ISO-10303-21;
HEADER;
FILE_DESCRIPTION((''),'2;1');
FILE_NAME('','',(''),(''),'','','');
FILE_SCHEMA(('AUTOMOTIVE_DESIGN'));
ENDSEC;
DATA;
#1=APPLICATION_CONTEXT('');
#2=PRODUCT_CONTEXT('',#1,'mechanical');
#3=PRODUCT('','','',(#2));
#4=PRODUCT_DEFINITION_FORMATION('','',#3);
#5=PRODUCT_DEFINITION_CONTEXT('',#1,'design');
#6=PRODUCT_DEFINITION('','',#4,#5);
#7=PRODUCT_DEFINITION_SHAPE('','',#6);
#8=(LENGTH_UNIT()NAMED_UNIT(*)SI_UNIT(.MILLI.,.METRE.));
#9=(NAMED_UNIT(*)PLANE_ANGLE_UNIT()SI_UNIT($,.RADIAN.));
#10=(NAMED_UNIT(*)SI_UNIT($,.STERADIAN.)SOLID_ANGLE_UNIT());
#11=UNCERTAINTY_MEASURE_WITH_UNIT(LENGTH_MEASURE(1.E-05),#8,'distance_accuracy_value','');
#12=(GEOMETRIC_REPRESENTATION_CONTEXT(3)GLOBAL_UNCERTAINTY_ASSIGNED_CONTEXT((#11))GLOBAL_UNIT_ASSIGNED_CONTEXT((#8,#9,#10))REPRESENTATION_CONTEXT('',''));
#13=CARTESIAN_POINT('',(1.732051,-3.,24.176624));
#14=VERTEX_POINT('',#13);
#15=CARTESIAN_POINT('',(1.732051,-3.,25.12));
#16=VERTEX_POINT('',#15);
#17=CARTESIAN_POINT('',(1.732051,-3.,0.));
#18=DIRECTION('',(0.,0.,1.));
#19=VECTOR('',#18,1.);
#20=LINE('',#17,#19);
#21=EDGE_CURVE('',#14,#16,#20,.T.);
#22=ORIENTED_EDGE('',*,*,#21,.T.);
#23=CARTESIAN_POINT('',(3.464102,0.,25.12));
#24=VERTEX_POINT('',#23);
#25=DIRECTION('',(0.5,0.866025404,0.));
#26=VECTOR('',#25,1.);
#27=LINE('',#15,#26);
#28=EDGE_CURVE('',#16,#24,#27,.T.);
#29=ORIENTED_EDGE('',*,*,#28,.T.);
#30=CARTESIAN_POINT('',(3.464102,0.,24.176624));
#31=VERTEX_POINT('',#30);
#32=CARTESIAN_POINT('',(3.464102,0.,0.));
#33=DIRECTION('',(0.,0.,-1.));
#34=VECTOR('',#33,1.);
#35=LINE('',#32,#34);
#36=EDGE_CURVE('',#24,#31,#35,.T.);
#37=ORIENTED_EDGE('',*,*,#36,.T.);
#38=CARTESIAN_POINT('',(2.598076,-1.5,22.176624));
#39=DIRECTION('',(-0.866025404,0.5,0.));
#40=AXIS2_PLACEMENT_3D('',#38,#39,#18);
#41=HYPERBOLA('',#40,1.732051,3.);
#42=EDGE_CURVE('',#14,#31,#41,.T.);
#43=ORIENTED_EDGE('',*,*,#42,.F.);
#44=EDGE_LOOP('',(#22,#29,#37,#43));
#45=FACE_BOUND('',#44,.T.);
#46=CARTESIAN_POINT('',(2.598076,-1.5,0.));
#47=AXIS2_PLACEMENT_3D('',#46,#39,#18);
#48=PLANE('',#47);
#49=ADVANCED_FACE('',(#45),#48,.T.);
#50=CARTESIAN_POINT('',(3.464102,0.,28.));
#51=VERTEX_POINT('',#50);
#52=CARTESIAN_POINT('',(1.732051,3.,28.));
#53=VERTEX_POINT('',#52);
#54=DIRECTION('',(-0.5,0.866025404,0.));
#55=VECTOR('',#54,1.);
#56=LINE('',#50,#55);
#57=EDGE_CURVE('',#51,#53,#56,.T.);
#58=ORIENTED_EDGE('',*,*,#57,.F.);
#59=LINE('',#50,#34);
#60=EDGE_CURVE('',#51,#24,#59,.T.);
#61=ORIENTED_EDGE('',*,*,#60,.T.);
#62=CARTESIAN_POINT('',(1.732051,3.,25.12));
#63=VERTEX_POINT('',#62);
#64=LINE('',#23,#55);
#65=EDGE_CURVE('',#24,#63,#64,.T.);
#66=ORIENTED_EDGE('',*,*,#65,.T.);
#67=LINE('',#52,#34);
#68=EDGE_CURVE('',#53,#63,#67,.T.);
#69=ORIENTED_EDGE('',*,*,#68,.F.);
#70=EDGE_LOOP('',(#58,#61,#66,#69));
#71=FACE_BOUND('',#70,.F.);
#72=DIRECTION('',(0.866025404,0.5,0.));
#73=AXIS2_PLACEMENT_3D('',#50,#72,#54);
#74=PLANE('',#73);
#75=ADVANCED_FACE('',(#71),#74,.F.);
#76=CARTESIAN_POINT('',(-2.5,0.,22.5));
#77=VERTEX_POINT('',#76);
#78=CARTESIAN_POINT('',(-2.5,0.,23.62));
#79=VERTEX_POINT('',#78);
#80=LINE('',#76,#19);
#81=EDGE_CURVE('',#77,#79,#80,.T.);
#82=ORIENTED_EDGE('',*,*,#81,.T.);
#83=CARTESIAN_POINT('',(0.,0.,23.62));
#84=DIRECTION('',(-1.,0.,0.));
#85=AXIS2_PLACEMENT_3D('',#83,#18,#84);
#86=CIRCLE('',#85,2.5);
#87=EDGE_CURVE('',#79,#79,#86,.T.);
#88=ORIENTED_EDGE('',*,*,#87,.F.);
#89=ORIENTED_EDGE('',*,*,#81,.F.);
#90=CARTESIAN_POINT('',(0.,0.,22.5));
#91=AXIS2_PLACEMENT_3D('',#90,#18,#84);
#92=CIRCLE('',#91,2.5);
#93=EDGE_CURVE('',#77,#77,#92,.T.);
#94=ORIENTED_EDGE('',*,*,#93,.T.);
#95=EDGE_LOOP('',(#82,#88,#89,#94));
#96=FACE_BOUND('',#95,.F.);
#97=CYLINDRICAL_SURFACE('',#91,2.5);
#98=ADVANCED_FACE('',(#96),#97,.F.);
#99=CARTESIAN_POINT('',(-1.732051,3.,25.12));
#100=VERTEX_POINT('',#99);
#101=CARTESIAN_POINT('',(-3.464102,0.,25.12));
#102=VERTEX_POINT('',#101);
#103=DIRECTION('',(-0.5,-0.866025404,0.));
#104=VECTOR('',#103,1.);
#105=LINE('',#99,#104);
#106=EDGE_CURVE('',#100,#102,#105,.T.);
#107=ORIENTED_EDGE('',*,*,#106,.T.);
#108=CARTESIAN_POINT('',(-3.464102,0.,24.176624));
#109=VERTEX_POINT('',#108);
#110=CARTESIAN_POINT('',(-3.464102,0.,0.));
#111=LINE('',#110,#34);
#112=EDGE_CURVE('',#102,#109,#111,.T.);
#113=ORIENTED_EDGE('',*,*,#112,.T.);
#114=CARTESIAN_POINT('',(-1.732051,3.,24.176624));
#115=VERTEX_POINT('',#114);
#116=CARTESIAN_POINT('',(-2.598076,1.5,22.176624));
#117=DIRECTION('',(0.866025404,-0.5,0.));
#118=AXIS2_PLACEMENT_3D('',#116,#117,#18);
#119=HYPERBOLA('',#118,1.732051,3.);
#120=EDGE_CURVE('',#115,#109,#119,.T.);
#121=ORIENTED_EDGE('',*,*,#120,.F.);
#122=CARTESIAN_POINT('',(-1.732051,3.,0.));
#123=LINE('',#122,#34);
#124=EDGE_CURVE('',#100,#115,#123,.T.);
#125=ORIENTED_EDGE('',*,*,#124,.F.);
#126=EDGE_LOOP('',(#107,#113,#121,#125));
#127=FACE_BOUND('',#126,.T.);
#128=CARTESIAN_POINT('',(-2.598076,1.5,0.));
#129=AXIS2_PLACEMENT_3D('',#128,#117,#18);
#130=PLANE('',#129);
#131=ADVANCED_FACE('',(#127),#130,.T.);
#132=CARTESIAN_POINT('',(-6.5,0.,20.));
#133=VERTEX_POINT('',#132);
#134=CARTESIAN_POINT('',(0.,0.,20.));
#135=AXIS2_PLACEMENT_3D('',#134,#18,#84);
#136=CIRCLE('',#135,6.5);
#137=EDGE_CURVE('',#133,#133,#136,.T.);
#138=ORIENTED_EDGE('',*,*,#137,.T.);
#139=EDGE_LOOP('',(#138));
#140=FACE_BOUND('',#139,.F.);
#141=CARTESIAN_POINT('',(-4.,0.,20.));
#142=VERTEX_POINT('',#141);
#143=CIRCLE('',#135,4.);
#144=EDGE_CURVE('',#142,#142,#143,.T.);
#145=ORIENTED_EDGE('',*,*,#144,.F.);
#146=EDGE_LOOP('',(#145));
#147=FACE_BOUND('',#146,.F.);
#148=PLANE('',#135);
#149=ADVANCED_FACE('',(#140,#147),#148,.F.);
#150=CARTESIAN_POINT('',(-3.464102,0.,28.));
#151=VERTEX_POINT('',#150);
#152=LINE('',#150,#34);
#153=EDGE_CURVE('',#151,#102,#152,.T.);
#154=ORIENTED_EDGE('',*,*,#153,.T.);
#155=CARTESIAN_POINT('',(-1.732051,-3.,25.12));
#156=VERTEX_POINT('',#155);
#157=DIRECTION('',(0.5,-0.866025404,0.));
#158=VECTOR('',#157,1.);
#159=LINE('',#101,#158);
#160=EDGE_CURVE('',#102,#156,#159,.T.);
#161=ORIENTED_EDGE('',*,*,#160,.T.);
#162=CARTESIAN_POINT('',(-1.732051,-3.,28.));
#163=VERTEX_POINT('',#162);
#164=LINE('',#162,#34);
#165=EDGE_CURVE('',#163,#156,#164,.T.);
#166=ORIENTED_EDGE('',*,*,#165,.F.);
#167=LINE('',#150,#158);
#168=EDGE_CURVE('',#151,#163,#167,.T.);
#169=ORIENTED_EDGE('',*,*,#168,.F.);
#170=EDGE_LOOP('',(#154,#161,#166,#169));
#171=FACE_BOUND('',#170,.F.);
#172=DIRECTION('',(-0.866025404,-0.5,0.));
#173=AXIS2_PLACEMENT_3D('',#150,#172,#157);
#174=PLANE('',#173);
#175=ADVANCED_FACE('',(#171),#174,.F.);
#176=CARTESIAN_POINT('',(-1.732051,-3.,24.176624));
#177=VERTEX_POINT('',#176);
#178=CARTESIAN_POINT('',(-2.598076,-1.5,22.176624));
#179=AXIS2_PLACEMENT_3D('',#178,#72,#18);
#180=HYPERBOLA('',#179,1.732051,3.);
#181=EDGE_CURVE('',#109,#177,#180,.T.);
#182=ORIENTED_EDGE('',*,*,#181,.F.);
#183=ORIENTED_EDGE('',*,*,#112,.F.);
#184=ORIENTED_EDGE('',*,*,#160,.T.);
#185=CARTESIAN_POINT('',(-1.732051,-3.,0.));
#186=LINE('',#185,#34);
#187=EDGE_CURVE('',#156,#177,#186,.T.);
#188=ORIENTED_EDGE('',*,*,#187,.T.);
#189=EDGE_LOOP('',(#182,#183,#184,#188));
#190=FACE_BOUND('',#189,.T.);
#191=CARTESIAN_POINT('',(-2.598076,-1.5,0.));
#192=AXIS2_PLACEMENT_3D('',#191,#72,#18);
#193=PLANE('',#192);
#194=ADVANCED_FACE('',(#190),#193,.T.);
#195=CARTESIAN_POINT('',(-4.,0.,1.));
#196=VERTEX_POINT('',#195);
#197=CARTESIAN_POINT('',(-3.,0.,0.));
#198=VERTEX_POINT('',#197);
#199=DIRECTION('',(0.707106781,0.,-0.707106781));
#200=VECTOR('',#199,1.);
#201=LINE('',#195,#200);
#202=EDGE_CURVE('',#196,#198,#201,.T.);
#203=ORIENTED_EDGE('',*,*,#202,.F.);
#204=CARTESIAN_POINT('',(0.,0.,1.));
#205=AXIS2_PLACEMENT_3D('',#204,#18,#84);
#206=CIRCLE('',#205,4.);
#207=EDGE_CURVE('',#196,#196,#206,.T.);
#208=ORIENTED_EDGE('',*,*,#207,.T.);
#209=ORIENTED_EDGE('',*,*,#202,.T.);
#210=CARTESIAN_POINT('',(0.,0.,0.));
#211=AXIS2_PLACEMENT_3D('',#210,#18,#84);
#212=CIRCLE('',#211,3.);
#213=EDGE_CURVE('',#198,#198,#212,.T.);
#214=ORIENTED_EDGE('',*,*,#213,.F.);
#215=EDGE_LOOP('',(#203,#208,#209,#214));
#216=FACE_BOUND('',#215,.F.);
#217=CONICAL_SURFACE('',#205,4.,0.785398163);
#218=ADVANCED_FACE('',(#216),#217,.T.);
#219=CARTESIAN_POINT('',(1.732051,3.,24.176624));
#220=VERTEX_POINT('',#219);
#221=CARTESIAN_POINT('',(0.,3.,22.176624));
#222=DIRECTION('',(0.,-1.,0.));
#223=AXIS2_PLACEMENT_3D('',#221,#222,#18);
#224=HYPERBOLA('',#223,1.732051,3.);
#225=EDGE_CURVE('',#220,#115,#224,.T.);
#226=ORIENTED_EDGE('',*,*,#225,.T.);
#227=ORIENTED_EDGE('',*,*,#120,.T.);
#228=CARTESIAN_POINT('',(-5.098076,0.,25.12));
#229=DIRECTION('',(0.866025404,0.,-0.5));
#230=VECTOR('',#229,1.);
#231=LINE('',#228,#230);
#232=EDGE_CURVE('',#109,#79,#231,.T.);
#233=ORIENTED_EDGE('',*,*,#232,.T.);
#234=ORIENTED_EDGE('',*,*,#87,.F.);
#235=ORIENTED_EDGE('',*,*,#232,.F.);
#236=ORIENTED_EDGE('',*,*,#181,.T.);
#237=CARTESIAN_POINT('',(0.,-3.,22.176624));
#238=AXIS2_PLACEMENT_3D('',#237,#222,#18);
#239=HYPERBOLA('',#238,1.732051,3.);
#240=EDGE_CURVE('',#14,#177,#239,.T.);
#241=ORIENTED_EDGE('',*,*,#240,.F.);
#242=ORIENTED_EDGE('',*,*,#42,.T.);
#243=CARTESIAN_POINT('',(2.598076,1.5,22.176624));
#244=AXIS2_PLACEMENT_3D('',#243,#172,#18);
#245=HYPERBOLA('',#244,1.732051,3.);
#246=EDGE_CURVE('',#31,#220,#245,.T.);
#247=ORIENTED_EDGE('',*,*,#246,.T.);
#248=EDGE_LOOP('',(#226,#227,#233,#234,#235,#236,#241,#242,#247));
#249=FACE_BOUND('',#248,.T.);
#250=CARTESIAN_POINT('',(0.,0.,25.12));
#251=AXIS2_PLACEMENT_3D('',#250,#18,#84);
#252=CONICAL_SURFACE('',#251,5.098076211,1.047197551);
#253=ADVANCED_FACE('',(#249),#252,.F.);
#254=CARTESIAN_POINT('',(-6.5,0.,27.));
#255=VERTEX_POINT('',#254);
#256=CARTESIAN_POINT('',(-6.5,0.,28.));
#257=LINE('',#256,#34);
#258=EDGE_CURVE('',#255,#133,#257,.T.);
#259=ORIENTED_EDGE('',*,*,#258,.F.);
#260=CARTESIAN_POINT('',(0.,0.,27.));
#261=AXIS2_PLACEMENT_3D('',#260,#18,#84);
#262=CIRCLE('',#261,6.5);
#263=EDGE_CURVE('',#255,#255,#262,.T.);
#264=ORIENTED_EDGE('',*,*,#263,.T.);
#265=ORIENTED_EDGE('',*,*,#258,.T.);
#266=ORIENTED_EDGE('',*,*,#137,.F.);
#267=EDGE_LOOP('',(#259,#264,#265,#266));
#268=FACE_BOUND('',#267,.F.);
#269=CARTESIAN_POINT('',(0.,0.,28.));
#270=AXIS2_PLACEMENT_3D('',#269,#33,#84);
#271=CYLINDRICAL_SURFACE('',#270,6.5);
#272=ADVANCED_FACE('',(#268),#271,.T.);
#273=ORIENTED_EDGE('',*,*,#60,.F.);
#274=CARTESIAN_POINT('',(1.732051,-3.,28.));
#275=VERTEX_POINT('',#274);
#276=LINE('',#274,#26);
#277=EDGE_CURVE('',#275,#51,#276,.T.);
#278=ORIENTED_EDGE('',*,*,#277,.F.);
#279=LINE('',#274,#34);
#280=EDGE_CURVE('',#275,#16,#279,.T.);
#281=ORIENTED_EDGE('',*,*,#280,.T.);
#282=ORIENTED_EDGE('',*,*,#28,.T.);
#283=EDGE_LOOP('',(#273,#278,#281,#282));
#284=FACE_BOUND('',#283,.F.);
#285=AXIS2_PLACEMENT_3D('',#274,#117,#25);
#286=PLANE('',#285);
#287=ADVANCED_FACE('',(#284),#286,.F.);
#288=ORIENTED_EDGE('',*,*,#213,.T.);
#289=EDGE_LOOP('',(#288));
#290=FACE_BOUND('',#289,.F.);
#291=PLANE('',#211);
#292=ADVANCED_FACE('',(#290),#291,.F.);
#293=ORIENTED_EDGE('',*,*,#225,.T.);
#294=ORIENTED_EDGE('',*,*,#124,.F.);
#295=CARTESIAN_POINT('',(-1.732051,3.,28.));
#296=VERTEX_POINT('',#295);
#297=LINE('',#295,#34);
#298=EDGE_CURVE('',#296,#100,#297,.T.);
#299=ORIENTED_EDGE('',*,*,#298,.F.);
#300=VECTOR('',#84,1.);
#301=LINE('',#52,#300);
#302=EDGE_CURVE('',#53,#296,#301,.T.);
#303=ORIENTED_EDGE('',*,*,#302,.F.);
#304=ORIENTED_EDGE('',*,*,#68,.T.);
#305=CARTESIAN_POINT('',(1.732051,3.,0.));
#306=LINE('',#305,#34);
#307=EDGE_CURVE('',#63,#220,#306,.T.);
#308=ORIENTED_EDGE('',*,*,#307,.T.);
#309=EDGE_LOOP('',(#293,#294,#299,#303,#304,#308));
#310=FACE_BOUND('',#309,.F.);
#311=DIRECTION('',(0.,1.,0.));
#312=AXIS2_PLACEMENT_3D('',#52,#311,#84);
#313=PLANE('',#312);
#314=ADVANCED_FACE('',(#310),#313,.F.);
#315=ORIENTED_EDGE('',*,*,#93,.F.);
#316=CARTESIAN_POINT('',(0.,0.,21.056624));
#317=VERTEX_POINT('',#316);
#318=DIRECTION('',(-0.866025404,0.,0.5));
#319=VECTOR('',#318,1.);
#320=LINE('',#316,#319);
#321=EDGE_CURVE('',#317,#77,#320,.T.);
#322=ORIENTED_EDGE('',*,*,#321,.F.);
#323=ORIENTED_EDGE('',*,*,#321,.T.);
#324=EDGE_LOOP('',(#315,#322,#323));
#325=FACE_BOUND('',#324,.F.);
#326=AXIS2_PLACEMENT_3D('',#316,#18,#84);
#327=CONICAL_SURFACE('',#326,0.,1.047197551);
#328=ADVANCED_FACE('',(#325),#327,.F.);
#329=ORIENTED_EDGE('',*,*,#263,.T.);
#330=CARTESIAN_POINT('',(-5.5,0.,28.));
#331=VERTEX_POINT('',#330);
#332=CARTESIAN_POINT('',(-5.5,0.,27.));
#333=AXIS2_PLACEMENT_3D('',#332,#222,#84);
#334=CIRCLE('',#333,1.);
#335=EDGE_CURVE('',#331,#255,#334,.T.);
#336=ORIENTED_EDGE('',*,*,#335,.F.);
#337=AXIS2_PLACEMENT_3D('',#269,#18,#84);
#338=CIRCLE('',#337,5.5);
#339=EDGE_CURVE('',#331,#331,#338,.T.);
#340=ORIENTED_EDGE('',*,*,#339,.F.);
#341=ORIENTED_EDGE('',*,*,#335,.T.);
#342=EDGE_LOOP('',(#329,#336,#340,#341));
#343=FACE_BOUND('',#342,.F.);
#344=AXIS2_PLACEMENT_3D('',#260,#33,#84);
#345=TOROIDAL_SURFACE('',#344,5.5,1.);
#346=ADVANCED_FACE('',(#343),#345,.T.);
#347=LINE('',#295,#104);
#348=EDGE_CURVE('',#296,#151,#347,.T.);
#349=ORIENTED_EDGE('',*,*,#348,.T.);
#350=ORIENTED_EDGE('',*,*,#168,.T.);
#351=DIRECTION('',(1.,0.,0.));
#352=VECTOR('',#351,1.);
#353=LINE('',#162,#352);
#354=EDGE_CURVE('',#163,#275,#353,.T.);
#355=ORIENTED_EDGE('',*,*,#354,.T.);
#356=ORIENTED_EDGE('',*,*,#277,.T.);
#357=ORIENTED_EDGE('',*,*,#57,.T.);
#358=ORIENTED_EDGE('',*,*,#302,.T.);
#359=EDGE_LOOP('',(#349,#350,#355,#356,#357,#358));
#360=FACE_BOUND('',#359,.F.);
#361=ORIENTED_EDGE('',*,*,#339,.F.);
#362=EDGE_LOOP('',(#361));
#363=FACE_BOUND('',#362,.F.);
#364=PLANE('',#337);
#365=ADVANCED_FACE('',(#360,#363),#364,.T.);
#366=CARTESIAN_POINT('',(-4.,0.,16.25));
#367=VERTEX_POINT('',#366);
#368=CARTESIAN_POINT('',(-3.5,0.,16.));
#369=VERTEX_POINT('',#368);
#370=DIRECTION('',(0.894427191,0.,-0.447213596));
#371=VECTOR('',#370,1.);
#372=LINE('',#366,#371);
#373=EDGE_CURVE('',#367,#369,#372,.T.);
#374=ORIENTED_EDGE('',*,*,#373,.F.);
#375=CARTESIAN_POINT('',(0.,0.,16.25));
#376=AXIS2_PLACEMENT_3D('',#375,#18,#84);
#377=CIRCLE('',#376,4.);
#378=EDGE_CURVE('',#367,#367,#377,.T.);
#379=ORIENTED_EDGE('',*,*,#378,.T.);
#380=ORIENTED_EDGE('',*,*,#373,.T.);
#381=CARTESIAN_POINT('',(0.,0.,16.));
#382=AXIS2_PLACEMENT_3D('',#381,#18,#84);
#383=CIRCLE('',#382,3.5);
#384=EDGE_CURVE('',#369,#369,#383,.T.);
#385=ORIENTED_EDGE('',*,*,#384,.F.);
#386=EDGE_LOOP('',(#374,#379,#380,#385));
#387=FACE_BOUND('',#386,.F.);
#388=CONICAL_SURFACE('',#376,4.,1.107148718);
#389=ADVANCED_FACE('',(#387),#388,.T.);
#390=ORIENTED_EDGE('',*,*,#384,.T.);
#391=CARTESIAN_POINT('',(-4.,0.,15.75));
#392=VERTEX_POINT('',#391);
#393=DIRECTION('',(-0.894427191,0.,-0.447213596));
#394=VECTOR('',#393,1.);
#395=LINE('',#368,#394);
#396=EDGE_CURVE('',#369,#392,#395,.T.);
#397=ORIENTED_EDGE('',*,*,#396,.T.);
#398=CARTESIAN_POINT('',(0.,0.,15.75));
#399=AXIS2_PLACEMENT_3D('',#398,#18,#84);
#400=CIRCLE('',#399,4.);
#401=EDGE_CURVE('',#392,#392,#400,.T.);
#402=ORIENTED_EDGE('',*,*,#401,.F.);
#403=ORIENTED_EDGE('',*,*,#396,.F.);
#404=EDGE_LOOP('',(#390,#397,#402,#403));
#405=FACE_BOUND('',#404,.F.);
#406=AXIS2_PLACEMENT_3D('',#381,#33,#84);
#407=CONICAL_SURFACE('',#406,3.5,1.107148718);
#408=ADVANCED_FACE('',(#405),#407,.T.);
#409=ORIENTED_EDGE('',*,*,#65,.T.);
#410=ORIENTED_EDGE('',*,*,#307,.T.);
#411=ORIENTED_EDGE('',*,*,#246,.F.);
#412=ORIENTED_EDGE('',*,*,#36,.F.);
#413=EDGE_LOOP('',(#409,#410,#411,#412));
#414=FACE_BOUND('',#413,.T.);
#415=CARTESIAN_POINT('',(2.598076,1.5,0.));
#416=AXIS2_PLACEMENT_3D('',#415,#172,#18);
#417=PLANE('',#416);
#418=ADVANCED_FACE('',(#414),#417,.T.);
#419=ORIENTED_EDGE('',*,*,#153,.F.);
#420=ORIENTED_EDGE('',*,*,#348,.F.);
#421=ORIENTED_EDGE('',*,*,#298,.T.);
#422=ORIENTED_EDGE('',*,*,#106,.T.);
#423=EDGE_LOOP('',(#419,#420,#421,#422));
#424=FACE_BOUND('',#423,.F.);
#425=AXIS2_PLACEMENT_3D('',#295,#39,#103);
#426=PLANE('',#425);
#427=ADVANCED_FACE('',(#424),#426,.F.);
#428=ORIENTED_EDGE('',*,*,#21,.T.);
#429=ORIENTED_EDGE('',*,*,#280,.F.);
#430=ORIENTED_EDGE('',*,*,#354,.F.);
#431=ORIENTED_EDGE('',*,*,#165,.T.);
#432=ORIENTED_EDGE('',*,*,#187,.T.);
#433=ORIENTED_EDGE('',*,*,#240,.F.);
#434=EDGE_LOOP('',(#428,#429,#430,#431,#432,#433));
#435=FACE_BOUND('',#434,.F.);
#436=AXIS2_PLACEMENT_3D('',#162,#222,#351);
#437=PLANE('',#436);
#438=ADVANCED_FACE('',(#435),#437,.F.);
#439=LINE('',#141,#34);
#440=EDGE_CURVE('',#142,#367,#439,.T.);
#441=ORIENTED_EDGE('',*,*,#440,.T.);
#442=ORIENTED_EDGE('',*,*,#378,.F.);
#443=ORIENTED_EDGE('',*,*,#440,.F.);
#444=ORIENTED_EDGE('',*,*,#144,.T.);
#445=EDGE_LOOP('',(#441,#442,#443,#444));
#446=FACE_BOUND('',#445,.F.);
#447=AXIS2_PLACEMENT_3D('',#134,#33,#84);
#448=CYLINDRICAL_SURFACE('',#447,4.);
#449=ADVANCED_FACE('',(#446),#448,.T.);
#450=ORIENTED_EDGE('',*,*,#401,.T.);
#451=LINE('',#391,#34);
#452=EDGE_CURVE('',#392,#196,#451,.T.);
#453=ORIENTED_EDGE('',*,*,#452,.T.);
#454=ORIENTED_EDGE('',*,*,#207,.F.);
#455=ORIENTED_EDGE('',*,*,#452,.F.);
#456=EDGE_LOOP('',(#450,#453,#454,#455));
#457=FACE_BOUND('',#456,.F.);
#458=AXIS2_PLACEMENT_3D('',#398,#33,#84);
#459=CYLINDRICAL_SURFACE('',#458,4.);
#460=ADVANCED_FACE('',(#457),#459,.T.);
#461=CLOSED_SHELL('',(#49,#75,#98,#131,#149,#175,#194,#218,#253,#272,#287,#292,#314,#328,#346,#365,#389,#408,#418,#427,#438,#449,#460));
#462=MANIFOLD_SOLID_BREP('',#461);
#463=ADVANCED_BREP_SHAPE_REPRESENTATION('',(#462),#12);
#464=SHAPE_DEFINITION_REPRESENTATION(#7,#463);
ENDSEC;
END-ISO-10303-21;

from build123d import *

# Parameters (mm, degrees)
F2_R     = 1
F3_SIZE  = 1
F5_DEPTH = 2.88


# Not quite as in the source:
# - a fillet or chamfer that OpenCascade refuses, or shapes differently, is made with other operations: its cross-section is extruded or revolved along the edge and cut away or added


with BuildPart() as f1:
    # F0 (on Front) → F1 (revolve)
    with BuildSketch(Plane.XZ):
        Polygon((-4, 0), (0, 0), (0, 21.056624327), (-2.5, 22.5), (-2.5, 28), (-6.5, 28), (-6.5, 20), (-4, 20), (-4, 16.25), (-3.5, 16), (-4, 15.75), align=None)
    revolve(axis=Axis((0, 0, 18.332445994), (0, 0, 1)))

    # F2
    f2_edges = [f1.edges().sort_by_distance(p)[0] for p in [
        (6.5, 0, 28),
    ]]
    fillet(f2_edges, radius=F2_R)

    # F3
    f3_edges = [f1.edges().sort_by_distance(p)[0] for p in [
        (4, 0, 0),
    ]]
    chamfer(f3_edges, length=F3_SIZE)

    # F4 (on face) → F5 (cut)
    with BuildSketch(Plane.XY.offset(28)):
        Polygon((-1.7320508076, -3), (1.7320508076, -3), (3.4641016151, 0), (1.7320508076, 3), (-1.7320508076, 3), (-3.4641016151, 0), align=None)
    extrude(amount=-F5_DEPTH, mode=Mode.SUBTRACT)

    # F6: chamfer of 1.5 x 2.5980762114 on 1 edges, made by hand


with BuildPart() as f6_tool2:
    # F6_s3 → F6_t4 (revolve)
    with BuildSketch(Plane.XZ):
        Polygon((-5.0980762114, 25.12), (-2.5, 23.62), (-2.5, 25.12), align=None)
    revolve(axis=Axis((0, 0, 25.12), (0, 0, 1)))

    split(bisect_by=Plane(origin=(-2.5980762114, -1.5, 0), x_dir=(0, 0, 1), z_dir=(0.8660254038, 0.5, 0)), keep=Keep.TOP)

    split(bisect_by=Plane(origin=(-2.5980762114, 1.5, 0), x_dir=(0, 0, 1), z_dir=(0.8660254038, -0.5, 0)), keep=Keep.TOP)

    split(bisect_by=Plane.XZ.offset(-3), keep=Keep.TOP)

    split(bisect_by=Plane(origin=(2.5980762114, 1.5, 0), x_dir=(0, 0, 1), z_dir=(-0.8660254038, -0.5, 0)), keep=Keep.TOP)

    split(bisect_by=Plane(origin=(2.5980762114, -1.5, 0), x_dir=(0, 0, 1), z_dir=(-0.8660254038, 0.5, 0)), keep=Keep.TOP)

    split(bisect_by=Plane.XZ.offset(3), keep=Keep.BOTTOM)


with BuildPart() as f1_1:
    add(f1.part)

    # F6_t1: cut F6_tool2
    add(f6_tool2.part, mode=Mode.SUBTRACT)


solid = f1_1.part
